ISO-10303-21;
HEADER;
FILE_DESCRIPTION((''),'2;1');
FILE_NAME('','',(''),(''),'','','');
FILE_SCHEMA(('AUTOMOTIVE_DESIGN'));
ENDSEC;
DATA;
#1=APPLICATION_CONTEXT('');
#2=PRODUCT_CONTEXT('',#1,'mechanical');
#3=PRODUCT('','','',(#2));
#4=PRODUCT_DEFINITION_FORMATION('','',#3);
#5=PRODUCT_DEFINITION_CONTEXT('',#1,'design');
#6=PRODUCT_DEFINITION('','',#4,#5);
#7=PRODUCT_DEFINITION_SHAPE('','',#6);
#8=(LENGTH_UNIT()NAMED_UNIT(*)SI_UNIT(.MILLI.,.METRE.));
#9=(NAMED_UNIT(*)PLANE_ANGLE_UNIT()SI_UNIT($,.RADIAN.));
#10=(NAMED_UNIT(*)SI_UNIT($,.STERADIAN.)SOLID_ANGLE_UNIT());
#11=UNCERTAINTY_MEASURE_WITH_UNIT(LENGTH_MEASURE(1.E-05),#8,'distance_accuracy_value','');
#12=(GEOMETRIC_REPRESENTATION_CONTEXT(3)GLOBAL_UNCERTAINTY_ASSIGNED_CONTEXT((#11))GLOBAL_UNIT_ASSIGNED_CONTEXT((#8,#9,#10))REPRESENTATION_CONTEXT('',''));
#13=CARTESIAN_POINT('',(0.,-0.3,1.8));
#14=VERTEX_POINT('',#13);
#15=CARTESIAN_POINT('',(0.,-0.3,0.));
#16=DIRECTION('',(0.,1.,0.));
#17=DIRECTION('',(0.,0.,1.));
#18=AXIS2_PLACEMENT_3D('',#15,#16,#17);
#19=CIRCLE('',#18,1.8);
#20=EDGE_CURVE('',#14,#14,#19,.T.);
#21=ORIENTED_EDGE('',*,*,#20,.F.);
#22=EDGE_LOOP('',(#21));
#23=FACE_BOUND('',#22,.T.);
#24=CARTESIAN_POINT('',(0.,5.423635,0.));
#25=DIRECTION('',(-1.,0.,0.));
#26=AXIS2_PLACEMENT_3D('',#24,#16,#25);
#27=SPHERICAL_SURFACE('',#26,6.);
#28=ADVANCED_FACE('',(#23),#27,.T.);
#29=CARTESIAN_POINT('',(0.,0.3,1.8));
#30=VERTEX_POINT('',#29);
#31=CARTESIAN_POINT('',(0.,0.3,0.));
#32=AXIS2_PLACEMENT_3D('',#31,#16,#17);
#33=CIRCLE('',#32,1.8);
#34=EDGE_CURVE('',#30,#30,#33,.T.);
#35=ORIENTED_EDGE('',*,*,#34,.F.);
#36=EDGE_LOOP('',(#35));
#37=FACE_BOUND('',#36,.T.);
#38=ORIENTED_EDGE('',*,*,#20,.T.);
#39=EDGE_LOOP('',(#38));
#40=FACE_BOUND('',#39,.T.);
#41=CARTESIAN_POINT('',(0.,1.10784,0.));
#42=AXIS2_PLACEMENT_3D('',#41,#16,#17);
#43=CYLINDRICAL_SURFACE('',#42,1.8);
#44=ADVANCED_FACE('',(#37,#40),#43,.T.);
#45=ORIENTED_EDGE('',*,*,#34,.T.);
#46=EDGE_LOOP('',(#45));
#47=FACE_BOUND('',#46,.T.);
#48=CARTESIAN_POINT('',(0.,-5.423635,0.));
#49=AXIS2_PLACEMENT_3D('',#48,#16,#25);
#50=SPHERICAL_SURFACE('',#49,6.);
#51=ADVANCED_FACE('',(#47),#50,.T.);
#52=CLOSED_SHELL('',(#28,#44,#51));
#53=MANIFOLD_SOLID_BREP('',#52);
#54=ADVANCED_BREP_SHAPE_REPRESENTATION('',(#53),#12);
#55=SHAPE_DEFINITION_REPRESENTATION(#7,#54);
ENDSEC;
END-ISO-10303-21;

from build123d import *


with BuildPart() as part:
    # 草图1 → 旋转1 (revolve)
    with BuildSketch(Plane.XY):
        with BuildLine():
            ThreePointArc((0, 0.576364791), (-0.910546196, 0.506871146), (-1.8, 0.3))
            Line((-1.8, 0.3), (-1.8, -0.3))
            ThreePointArc((-1.8, -0.3), (-0.910546196, -0.506871146), (0, -0.576364791))
            Line((0, -0.576364791), (0, 0.576364791))
        make_face()
    revolve(axis=Axis((0, 1.107839614, 0), (0, -1, 0)))


solid = part.part
